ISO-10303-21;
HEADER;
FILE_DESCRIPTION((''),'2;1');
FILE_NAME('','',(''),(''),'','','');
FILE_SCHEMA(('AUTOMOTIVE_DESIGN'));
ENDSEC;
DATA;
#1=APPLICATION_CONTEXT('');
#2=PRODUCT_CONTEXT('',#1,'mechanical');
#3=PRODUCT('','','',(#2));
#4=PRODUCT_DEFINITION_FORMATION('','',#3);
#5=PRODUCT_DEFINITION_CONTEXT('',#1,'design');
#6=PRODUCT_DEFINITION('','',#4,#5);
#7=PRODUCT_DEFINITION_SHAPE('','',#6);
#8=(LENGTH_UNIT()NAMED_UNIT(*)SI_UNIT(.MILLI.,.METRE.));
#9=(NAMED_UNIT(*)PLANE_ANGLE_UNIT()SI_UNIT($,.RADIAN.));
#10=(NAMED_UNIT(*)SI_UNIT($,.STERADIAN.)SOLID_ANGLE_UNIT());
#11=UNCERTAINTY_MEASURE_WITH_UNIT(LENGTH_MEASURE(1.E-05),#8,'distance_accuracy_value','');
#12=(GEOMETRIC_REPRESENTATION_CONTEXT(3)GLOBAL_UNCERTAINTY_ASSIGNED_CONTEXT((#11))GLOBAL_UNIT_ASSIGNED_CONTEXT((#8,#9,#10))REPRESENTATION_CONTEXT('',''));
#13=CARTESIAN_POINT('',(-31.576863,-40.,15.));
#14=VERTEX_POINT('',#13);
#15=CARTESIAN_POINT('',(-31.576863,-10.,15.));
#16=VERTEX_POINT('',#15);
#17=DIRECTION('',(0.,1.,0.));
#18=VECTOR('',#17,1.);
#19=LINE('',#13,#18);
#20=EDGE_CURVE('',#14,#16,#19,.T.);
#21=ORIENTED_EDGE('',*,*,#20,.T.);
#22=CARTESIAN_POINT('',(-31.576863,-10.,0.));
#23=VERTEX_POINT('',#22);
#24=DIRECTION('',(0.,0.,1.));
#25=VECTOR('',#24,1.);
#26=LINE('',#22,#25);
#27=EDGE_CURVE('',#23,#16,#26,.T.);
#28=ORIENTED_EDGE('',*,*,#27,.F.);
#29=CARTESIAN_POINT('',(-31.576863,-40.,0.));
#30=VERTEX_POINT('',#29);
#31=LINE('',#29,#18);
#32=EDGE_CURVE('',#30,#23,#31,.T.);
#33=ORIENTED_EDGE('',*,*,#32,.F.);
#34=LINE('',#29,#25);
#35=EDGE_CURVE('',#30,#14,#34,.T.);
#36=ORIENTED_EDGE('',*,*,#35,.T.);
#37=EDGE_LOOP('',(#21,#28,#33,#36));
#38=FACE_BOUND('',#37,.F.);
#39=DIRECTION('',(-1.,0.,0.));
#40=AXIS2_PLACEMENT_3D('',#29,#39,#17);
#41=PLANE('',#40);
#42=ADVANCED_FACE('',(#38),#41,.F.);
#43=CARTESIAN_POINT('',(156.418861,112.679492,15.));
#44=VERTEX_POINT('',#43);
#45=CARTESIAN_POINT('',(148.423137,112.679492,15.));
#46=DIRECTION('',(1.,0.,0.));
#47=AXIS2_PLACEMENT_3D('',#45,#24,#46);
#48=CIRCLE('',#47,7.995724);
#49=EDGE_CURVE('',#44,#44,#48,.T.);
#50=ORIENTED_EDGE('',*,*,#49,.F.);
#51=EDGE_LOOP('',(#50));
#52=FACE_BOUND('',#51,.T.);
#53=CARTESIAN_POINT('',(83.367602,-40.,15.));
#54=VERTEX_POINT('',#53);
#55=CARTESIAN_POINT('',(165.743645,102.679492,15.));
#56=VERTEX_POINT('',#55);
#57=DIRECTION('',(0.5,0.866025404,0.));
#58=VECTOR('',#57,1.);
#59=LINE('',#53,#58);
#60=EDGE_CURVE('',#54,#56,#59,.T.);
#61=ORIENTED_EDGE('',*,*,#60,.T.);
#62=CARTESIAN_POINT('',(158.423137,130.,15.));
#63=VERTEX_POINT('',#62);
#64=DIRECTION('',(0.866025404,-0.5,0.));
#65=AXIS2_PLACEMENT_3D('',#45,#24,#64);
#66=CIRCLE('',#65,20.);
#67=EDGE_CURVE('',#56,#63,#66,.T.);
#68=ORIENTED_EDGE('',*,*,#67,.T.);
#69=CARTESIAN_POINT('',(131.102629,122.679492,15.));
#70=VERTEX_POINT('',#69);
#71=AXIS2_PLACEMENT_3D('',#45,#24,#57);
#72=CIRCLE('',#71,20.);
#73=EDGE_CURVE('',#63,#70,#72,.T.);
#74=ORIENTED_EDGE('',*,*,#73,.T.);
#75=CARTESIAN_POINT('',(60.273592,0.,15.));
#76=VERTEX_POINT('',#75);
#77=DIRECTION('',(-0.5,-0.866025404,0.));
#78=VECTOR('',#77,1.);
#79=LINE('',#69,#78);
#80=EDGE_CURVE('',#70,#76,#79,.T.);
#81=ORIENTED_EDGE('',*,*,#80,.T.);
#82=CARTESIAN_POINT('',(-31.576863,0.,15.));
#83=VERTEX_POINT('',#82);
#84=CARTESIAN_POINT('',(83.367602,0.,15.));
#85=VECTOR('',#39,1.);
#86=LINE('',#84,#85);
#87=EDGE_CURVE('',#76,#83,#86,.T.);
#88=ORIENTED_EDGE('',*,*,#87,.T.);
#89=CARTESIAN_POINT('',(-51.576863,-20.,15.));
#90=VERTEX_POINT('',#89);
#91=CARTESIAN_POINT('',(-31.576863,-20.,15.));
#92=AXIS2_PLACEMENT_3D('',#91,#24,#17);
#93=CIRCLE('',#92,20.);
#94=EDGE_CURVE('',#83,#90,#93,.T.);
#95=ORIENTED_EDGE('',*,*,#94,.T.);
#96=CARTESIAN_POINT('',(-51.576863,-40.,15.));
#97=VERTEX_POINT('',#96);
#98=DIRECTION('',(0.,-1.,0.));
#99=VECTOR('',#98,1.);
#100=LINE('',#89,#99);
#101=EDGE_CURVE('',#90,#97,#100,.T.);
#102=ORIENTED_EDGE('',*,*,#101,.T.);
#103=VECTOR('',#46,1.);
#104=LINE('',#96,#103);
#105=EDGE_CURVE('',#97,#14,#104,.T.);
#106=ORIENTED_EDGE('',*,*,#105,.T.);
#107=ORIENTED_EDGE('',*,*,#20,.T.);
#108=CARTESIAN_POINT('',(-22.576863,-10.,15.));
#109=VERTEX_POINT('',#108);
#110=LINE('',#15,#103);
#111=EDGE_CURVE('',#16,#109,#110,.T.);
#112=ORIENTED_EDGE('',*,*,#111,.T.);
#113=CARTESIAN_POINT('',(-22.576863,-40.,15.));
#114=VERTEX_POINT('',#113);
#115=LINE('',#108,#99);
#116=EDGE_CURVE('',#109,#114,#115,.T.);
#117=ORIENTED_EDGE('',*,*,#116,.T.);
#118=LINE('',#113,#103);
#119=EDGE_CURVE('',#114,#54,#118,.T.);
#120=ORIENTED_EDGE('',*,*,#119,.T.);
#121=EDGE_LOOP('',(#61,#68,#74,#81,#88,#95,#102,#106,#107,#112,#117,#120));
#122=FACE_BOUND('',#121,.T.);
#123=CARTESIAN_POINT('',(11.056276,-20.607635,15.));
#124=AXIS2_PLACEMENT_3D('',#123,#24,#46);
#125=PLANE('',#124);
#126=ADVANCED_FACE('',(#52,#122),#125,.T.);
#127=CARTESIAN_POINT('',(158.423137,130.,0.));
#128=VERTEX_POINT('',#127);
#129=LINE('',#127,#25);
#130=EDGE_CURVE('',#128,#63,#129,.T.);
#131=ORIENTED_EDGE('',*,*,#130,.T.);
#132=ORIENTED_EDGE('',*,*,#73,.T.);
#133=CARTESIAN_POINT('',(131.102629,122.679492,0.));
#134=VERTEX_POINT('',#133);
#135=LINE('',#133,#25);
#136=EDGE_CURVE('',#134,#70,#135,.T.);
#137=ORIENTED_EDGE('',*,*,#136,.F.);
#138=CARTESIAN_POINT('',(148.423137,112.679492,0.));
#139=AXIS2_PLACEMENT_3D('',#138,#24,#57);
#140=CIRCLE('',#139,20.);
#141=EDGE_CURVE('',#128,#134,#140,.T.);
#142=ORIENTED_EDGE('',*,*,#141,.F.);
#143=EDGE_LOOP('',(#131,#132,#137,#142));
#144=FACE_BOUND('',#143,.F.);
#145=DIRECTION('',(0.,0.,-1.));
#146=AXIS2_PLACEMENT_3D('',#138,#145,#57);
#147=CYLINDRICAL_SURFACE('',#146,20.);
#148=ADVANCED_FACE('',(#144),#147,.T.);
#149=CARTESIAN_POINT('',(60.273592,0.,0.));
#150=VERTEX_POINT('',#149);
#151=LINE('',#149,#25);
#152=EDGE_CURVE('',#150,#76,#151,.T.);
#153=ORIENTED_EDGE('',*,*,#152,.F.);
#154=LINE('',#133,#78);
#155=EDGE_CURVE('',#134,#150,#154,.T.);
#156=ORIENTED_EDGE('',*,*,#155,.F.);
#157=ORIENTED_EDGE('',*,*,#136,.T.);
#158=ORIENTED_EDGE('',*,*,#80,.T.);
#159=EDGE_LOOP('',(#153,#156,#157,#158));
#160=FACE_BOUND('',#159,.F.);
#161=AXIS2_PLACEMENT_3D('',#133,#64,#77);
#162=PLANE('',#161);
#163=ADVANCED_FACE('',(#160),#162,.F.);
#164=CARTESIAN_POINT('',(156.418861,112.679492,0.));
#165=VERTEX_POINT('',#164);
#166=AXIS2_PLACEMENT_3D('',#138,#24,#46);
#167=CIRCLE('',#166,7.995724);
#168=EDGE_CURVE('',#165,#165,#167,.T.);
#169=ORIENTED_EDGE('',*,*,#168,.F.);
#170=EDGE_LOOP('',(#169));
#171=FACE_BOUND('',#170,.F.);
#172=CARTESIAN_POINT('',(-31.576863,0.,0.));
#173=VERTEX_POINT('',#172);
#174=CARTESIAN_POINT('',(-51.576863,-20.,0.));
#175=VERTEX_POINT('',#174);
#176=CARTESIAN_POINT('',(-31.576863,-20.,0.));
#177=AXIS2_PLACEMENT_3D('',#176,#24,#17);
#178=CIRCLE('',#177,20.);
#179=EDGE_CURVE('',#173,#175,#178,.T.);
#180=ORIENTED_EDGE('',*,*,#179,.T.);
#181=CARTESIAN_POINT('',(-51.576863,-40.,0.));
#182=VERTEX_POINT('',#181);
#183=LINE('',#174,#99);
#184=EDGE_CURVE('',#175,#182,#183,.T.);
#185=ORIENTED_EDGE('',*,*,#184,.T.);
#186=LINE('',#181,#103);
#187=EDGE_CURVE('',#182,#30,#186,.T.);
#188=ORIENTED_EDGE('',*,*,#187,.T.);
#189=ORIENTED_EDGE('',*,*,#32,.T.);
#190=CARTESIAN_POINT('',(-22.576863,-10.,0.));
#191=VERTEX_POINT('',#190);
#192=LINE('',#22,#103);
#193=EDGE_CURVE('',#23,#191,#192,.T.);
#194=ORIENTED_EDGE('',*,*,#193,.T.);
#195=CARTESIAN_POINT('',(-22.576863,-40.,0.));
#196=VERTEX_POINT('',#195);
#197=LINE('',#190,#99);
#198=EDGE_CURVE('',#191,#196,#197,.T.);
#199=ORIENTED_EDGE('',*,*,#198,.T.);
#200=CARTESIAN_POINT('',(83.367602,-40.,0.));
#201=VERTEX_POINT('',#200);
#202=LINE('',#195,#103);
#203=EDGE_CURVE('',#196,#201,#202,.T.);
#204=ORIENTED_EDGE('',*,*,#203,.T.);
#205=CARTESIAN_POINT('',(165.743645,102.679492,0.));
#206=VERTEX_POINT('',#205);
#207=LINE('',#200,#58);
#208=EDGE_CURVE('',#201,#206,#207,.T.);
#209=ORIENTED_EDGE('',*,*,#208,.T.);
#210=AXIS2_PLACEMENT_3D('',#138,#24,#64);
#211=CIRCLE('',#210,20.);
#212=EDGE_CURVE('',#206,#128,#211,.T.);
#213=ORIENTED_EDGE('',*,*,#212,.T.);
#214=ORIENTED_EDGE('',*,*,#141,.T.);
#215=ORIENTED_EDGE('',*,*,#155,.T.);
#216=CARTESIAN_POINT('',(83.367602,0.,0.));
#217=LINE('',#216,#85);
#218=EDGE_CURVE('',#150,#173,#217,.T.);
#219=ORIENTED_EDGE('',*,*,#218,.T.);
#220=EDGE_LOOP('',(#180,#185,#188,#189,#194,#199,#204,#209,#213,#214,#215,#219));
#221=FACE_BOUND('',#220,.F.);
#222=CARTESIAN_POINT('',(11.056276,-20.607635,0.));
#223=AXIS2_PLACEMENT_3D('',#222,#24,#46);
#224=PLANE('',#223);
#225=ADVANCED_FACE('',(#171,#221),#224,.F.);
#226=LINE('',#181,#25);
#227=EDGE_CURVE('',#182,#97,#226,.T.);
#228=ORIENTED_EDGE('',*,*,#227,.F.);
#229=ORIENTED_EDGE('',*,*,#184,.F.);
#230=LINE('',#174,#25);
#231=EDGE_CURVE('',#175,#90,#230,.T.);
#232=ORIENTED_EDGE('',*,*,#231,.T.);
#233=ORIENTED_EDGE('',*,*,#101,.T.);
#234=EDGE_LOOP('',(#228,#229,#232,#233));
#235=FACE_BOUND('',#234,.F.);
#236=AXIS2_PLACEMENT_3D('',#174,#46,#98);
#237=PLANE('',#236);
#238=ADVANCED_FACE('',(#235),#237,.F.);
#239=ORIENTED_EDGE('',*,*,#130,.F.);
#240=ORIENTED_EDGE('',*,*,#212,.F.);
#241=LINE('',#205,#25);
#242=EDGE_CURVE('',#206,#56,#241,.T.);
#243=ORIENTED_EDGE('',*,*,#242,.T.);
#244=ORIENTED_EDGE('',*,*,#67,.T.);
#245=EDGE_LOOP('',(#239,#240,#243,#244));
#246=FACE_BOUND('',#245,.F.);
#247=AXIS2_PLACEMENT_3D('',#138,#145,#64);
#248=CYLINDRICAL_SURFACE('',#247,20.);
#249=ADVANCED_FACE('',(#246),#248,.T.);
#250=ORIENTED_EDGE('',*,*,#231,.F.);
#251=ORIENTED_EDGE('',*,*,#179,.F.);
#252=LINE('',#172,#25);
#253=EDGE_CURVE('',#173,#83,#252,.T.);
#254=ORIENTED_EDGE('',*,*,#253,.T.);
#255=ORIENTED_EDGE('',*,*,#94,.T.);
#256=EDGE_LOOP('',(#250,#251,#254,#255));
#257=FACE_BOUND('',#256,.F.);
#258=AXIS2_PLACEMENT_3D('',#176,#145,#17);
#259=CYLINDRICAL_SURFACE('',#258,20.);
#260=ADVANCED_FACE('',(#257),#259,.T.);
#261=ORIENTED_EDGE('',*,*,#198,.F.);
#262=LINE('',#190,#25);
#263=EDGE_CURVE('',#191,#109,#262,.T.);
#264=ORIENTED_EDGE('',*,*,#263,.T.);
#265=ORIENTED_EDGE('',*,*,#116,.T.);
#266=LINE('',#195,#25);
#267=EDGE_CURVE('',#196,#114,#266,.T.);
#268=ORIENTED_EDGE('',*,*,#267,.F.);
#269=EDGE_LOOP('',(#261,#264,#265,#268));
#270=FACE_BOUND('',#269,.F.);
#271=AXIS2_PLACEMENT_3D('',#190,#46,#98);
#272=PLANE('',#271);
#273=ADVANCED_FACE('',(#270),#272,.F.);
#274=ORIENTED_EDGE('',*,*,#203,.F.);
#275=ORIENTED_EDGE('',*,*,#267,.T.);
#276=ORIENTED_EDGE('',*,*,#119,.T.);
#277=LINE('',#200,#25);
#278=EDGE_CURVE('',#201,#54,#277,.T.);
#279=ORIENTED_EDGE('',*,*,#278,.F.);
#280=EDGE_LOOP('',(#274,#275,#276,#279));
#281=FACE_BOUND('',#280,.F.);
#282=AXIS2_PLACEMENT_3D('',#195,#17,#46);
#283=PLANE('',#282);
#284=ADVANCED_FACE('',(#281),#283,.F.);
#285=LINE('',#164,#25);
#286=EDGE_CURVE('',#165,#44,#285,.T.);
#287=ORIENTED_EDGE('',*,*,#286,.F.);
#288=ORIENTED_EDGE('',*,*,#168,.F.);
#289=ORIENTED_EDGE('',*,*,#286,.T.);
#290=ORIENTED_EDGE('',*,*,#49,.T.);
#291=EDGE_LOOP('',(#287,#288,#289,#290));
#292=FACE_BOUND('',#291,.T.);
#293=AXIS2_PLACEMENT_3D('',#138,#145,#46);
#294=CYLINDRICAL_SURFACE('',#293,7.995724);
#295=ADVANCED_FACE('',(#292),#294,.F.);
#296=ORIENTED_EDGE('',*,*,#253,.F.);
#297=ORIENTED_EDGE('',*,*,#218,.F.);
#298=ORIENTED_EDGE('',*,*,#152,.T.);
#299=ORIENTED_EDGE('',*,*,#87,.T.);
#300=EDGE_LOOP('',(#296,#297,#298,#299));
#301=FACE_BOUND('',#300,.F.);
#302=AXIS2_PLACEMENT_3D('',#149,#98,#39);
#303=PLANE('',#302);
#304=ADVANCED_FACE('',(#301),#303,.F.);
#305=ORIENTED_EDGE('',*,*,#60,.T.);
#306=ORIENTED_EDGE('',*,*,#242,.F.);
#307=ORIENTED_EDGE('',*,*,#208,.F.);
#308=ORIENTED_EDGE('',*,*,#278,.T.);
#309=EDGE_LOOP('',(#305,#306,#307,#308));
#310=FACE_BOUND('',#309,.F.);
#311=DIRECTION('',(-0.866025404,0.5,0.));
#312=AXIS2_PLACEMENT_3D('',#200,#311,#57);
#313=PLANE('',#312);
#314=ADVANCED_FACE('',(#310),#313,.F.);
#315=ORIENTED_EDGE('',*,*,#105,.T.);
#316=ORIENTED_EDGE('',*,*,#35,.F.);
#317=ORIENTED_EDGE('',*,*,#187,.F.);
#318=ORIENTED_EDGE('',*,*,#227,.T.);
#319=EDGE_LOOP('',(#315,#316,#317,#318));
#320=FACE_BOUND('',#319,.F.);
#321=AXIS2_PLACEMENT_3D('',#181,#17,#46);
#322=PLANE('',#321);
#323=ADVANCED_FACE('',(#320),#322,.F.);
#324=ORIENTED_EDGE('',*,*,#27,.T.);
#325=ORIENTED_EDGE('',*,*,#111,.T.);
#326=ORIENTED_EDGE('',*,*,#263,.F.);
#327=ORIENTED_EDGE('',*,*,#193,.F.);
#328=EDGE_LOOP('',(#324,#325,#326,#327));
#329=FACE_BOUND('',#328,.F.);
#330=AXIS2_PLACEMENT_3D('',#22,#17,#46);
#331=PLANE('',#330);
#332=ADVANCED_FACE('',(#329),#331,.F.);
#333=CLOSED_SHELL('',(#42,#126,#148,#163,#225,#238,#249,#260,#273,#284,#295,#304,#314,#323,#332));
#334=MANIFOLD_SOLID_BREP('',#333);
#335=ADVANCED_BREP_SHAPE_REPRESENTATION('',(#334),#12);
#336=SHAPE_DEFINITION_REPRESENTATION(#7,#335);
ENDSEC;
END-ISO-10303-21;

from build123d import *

# Parameters (mm, degrees)
F0_R     = 7.9957240037
F1_DEPTH = 15


# Not quite as in the source:
# - a feature names something its author has since deleted; it is built from what else it names


with BuildPart() as f1:
    # F0 (on Top) → F1 (new body)
    with BuildSketch(Plane.XY):
        with BuildLine():
            Line((60.2735915523, 0), (-31.5768626855, 0))
            ThreePointArc((-31.5768626855, 0), (-45.7189983092, -5.8578643763), (-51.5768626855, -20))
            Line((-51.5768626855, -20), (-51.5768626855, -40))
            Line((-51.5768626855, -40), (-31.5768626855, -40))
            Line((-31.5768626855, -40), (-31.5768626855, -10))
            Line((-31.5768626855, -10), (-22.5768626855, -10))
            Line((-22.5768626855, -10), (-22.5768626855, -40))
            Line((-22.5768626855, -40), (83.3676023199, -40))
            Line((83.3676023199, -40), (83.3676023199, -20))
            Line((83.3676023199, -20), (83.3676023199, 0))
            Line((83.3676023199, 0), (60.2735915523, 0))
        make_face()
        with BuildLine():
            Line((131.1026292389, 122.6794919243), (60.2735915523, 0))
            Line((60.2735915523, 0), (83.3676023199, 0))
            Line((83.3676023199, 0), (83.3676023199, -20))
            Line((83.3676023199, -20), (83.3676023199, -40))
            Line((83.3676023199, -40), (165.7436453902, 102.6794919243))
            ThreePointArc((165.7436453902, 102.6794919243), (167.7416538403, 117.8558728264), (158.4231373145, 130))
            ThreePointArc((158.4231373145, 130), (143.2467564125, 131.9980084501), (131.1026292389, 122.6794919243))
        make_face()
        with Locations((148.4231373145, 112.6794919243)):
            Circle(F0_R, mode=Mode.SUBTRACT)
    extrude(amount=F1_DEPTH)


solid = f1.part
